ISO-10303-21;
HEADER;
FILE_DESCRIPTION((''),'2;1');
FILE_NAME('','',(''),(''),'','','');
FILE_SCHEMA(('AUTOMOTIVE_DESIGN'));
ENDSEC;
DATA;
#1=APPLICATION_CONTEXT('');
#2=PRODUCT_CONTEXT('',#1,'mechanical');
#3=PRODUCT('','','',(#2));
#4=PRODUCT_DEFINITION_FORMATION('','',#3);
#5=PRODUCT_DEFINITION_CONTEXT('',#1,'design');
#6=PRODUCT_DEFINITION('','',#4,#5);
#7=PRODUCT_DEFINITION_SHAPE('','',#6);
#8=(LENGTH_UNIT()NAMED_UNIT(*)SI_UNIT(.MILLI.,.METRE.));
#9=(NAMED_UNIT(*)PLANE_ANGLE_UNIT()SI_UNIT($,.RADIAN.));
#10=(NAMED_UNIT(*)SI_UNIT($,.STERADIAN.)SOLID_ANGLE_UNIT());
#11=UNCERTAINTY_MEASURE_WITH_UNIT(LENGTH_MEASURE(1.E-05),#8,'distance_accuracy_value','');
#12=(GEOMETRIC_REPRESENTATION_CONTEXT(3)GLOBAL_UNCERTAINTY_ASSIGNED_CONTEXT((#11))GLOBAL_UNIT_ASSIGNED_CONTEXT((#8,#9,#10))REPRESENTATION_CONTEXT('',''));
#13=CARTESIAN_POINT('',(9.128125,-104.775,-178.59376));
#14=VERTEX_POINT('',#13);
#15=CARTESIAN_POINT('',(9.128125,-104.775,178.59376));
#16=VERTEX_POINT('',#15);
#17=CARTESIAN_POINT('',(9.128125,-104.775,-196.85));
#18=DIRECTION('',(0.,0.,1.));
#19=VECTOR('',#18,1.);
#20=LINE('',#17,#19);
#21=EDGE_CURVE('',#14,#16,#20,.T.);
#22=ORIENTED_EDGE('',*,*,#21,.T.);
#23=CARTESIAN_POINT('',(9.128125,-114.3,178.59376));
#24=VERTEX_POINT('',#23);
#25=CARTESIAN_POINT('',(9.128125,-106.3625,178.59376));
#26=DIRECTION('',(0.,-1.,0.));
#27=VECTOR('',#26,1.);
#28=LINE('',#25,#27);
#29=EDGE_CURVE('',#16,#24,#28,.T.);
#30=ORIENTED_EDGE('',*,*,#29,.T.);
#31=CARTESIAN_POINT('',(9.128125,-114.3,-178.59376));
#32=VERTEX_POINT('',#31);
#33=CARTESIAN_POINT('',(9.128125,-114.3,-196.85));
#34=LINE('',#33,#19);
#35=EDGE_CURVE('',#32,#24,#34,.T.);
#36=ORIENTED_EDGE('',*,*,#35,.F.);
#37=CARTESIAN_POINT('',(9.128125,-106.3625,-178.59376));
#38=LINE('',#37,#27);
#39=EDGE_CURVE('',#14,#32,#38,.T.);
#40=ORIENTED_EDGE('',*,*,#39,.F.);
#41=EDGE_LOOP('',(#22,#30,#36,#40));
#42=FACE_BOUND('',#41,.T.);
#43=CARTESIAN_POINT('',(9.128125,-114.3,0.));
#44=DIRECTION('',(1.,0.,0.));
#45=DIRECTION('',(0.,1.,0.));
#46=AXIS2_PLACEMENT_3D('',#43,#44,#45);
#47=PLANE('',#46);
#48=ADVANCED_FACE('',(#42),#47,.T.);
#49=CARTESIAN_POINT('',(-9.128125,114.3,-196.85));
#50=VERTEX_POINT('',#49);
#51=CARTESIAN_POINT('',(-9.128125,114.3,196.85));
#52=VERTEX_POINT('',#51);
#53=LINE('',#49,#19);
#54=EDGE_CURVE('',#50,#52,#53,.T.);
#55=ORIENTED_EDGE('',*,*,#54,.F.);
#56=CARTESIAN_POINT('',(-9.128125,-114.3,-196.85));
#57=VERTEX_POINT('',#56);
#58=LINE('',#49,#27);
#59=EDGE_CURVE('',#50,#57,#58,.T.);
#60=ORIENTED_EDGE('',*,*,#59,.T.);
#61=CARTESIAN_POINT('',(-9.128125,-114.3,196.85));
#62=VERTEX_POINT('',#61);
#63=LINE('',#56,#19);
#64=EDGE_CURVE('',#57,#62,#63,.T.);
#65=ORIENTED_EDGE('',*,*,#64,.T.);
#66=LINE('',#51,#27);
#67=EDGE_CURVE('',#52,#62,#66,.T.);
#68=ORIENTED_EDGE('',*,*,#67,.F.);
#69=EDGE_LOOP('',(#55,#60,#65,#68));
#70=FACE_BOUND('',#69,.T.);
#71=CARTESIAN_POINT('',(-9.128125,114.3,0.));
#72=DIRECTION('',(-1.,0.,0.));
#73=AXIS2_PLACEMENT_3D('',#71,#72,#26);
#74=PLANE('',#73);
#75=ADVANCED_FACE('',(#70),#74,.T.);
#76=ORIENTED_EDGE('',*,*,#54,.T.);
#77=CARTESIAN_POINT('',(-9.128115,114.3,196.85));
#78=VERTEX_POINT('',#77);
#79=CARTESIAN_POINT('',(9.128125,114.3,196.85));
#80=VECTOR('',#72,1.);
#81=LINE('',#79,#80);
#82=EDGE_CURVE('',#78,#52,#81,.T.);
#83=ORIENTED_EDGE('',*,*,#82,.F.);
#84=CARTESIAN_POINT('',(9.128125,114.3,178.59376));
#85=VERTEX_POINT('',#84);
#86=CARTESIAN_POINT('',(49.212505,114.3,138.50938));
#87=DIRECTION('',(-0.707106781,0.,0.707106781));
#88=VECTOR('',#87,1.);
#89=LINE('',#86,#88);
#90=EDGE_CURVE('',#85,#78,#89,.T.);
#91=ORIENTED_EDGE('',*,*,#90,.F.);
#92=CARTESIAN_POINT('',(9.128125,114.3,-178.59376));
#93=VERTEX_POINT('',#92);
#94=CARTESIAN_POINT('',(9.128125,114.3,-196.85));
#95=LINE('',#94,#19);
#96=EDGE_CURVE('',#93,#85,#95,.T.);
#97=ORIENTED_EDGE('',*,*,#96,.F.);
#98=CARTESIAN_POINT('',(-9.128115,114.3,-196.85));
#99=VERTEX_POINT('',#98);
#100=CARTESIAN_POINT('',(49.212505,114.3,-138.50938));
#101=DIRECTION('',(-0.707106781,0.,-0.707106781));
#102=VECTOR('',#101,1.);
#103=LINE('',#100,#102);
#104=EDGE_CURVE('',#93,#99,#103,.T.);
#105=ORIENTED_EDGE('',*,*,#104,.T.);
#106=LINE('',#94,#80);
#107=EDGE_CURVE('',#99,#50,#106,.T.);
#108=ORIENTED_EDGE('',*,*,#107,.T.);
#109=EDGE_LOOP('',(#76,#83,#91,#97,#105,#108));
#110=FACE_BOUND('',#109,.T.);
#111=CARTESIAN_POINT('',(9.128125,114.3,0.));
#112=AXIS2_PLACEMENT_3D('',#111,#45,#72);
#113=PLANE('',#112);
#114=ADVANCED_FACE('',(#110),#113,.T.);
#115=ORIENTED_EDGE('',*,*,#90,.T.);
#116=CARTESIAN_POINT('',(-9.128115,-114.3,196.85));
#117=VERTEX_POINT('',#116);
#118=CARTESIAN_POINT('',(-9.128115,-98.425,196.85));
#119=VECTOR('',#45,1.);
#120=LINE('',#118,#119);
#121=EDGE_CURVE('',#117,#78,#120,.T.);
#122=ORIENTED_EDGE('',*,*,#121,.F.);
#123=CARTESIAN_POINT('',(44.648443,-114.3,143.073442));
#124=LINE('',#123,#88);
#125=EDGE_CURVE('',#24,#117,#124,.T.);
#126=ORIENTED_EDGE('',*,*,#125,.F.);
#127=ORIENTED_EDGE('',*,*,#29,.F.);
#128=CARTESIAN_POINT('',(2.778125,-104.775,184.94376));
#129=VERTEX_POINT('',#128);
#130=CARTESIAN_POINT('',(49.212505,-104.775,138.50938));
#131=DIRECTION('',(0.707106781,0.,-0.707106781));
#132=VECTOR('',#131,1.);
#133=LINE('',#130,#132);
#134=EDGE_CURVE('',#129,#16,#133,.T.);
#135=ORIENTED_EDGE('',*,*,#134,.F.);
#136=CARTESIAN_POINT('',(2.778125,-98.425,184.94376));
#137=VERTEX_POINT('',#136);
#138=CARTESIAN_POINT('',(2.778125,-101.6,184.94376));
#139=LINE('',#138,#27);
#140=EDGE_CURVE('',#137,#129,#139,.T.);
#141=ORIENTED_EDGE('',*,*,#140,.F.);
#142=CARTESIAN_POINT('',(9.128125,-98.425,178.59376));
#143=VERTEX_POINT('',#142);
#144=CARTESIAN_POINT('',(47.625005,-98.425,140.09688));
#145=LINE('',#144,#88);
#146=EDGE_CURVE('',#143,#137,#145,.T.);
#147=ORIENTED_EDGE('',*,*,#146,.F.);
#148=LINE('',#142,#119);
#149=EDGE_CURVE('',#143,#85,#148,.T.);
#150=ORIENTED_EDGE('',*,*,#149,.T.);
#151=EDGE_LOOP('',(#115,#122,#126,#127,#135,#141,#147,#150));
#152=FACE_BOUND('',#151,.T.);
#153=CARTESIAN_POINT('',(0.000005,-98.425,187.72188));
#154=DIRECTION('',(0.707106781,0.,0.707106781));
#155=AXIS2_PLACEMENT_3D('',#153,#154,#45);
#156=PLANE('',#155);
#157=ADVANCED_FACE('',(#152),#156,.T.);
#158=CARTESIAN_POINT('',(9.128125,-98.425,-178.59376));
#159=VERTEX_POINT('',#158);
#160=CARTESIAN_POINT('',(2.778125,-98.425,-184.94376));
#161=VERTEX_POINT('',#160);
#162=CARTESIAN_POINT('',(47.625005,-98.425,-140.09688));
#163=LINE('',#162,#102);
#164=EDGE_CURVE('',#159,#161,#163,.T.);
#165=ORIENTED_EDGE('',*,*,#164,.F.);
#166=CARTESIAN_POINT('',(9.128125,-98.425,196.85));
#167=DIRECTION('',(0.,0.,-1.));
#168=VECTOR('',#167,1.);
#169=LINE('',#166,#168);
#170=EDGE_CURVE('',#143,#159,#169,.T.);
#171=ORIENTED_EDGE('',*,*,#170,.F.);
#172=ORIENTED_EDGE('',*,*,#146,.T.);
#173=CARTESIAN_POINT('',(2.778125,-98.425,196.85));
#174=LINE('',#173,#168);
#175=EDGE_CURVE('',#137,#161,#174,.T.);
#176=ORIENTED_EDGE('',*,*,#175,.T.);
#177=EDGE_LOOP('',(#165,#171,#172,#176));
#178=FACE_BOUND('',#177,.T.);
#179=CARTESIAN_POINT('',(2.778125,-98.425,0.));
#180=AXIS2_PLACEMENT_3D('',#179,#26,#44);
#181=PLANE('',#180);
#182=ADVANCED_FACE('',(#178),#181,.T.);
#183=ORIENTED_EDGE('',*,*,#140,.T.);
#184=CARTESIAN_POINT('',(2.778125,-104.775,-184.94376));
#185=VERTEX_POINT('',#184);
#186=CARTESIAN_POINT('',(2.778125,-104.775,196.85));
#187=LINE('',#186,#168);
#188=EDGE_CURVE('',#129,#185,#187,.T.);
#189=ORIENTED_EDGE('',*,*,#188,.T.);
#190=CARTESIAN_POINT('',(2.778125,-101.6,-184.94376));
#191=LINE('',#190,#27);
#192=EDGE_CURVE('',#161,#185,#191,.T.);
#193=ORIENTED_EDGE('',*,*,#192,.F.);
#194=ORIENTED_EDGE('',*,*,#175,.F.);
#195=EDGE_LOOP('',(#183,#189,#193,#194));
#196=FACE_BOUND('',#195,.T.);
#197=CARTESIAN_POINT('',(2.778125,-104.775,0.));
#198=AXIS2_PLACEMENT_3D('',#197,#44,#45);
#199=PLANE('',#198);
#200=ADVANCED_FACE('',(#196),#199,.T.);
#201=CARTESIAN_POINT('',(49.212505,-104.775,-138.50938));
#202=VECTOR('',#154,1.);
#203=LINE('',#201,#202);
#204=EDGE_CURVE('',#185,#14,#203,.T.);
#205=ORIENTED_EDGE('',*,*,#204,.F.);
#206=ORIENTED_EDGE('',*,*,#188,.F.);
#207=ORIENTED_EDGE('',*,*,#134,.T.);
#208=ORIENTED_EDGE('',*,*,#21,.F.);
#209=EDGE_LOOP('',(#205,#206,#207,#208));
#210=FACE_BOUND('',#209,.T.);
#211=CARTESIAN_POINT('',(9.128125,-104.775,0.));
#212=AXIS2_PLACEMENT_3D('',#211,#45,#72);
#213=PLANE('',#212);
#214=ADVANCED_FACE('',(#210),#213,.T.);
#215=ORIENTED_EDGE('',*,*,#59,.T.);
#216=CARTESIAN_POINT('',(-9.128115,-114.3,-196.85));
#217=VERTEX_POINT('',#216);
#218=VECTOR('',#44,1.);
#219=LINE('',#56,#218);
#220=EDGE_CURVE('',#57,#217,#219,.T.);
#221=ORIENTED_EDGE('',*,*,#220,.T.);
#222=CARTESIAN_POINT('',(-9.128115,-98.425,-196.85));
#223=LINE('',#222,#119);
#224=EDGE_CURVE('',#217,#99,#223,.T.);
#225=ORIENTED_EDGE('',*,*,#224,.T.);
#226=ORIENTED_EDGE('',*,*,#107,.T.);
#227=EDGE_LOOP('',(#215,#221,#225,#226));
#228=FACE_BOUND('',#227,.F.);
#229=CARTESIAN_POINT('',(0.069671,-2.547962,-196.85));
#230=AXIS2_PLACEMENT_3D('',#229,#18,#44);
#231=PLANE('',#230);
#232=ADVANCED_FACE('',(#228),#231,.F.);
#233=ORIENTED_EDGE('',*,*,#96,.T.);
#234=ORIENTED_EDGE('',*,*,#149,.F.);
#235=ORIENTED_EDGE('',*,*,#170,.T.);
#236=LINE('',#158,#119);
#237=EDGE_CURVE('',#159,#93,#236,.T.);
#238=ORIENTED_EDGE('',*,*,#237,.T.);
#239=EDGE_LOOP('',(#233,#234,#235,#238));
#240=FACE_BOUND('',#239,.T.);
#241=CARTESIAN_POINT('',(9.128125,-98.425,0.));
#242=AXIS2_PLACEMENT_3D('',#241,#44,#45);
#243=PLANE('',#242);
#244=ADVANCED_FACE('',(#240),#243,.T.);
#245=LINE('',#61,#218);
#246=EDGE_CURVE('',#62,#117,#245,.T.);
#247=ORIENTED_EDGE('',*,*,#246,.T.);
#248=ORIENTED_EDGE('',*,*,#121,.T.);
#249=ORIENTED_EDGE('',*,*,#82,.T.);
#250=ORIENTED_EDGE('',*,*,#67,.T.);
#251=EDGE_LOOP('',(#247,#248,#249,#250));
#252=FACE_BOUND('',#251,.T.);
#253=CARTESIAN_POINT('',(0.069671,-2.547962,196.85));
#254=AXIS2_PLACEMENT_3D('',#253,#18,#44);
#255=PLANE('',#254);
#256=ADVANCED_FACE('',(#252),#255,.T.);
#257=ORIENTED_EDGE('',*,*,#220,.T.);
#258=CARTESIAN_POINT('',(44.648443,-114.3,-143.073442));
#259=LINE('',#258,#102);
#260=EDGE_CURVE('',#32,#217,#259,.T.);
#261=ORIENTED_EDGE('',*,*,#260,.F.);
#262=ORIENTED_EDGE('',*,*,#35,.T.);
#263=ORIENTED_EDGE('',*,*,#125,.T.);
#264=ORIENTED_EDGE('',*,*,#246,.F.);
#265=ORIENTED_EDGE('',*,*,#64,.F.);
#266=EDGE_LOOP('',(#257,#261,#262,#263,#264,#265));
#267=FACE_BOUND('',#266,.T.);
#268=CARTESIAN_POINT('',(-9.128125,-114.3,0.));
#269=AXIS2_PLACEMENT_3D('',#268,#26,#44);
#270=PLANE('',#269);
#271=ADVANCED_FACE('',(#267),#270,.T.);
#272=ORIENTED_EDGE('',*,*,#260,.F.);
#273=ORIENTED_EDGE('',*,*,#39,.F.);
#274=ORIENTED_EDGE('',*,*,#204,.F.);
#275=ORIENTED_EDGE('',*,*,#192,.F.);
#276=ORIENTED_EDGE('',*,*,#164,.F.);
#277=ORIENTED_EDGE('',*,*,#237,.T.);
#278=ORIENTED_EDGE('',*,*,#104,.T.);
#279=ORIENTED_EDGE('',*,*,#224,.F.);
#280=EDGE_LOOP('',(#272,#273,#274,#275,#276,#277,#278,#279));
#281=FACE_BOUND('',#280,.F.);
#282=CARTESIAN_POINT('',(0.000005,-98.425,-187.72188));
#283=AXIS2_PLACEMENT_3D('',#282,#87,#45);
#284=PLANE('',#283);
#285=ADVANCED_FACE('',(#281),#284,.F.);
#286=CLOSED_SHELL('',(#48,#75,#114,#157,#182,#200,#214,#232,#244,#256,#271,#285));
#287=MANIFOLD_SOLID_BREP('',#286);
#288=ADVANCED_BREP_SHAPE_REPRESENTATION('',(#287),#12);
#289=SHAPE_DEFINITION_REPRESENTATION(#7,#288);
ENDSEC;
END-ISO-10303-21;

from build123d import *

# Parameters (mm, degrees)
F1_DEPTH = 196.85
F2_SIZE2 = 18.25624
F2_SIZE  = 18.25624
F3_SIZE  = 18.25624


# Not quite as in the source:
# - a fillet or chamfer is up to 0.001 mm smaller than in the source, because OpenCascade refuses the exact size


with BuildPart() as f1:
    # F0 (on Top) → F1 (new body, symmetric)
    with BuildSketch(Plane.XY):
        Polygon((9.128125, -98.425), (9.128125, 114.3), (-9.128125, 114.3), (-9.128125, -114.3), (9.128125, -114.3), (9.128125, -104.775), (2.778125, -104.775), (2.778125, -98.425), align=None)
    extrude(amount=F1_DEPTH, both=True)

    # F2 (size 18.25625 and 18.25625 in the source; OpenCascade refuses exactly that, so slightly less here)
    f2_edges = [f1.edges().sort_by_distance(p)[0] for p in [
        (9.128125, 7.9375, 196.85),
    ]]
    chamfer(f2_edges, length=F2_SIZE, length2=F2_SIZE2)

    # F3 (size 18.25625 in the source; OpenCascade refuses exactly that, so slightly less here)
    f3_edges = [f1.edges().sort_by_distance(p)[0] for p in [
        (9.128125, 7.9375, -196.85),
    ]]
    chamfer(f3_edges, length=F3_SIZE)


solid = f1.part
